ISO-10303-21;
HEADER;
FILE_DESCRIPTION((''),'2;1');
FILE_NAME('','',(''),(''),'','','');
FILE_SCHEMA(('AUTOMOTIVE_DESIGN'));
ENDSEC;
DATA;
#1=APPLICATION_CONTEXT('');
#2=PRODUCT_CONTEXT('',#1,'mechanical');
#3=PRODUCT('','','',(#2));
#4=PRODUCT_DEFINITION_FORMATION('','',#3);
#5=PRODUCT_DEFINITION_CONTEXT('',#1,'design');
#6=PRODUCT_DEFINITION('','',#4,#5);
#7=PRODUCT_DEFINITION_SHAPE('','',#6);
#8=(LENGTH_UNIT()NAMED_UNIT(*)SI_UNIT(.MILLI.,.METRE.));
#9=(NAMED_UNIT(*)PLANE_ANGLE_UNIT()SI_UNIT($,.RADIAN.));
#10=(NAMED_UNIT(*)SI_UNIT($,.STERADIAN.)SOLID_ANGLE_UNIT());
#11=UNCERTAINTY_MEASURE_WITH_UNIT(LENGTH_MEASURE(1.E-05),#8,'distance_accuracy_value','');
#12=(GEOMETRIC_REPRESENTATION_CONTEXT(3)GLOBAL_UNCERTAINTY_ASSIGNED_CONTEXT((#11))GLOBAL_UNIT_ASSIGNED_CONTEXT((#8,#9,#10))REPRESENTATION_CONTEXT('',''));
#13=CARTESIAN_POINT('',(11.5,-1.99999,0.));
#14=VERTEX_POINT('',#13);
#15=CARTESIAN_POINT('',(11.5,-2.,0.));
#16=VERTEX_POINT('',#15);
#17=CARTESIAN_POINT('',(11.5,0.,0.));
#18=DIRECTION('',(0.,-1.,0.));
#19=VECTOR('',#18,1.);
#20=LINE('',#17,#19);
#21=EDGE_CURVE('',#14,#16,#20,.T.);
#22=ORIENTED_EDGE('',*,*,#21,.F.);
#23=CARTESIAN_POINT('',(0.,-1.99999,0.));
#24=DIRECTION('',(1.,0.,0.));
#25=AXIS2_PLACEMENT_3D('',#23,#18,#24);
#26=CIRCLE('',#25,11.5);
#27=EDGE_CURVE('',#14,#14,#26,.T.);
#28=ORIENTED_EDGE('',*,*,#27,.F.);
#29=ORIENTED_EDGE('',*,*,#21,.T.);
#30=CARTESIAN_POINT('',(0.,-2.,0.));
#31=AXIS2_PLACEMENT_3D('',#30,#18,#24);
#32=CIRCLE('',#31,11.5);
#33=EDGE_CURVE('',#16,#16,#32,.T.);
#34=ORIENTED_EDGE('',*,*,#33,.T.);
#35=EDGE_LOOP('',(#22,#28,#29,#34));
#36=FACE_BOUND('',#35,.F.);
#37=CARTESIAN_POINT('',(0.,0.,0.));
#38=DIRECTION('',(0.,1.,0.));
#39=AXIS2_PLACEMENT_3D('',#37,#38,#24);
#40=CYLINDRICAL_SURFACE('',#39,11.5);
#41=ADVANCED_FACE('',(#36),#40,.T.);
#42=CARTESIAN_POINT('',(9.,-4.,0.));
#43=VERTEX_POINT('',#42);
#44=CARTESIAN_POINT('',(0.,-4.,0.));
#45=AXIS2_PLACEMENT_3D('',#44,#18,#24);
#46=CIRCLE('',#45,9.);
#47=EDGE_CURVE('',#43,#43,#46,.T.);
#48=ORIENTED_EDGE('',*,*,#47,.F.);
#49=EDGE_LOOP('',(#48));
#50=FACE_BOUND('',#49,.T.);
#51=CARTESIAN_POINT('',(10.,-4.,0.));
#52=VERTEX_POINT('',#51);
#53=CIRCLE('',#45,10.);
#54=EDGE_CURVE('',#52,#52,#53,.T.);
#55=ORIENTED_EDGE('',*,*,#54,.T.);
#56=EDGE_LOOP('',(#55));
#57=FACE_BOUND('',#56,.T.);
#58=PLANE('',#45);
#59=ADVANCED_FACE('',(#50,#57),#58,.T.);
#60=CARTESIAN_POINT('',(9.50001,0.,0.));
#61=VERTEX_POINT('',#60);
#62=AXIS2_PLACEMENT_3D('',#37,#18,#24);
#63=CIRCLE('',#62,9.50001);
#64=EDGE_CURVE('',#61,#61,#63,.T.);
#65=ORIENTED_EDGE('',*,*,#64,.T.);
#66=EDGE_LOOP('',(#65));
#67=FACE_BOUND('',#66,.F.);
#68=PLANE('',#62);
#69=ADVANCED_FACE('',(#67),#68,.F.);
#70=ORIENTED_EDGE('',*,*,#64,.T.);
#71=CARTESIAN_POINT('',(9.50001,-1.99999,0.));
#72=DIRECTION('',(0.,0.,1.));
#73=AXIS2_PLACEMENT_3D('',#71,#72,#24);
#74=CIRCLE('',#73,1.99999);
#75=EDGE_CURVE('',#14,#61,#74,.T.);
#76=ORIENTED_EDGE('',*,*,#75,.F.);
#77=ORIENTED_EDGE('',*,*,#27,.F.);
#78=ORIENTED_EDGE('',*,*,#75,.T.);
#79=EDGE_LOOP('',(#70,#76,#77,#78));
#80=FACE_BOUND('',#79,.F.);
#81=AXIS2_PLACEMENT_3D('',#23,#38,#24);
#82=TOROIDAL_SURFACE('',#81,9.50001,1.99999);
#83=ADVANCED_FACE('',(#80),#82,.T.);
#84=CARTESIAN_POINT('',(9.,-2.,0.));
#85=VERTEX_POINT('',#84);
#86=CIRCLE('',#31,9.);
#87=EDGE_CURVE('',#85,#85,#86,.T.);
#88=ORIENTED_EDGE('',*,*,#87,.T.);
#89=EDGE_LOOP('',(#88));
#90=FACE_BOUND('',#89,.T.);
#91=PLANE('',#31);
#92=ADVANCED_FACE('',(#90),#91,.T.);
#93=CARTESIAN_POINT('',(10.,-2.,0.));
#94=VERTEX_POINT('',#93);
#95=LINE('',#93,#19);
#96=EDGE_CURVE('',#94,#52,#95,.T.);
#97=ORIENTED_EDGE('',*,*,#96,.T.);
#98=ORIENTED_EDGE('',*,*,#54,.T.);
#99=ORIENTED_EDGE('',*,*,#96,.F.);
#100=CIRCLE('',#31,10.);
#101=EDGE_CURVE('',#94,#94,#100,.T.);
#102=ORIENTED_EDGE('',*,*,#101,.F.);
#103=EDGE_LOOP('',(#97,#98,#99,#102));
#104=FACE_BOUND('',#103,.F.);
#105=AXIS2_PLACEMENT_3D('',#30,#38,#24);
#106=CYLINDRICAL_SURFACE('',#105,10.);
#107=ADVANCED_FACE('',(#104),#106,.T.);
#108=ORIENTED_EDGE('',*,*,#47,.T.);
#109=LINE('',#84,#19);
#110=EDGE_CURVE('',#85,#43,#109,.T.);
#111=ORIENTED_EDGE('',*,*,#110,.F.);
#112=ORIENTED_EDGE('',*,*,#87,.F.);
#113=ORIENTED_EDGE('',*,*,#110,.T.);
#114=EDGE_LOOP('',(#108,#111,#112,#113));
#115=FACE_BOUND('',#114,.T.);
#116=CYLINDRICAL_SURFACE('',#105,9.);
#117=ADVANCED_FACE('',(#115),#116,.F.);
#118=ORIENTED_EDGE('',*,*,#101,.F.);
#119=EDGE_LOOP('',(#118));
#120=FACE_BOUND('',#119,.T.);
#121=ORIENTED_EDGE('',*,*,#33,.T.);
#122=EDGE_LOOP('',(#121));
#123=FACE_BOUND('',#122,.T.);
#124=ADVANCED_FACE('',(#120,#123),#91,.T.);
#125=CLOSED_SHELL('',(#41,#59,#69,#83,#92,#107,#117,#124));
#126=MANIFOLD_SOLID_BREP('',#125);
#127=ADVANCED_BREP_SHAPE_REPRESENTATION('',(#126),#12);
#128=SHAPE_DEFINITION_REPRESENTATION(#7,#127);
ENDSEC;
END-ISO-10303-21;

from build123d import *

# Parameters (mm, degrees)
F0_R     = 11.5
F1_DEPTH = 2
F2_R     = 10
F2_R_2   = 9
F3_DEPTH = 2
F4_R     = 1.99999


# Not quite as in the source:
# - a fillet or chamfer is up to 0.001 mm smaller than in the source, because OpenCascade refuses the exact size


with BuildPart() as f1:
    # F0 (on Front) → F1 (new body)
    with BuildSketch(Plane.XZ):
        Circle(F0_R)
    extrude(amount=F1_DEPTH)

    # F2 (on face) → F3 (join)
    with BuildSketch(Plane.XZ.offset(2)):
        Circle(F2_R)
        Circle(F2_R_2, mode=Mode.SUBTRACT)
    extrude(amount=F3_DEPTH)

    # F4 (radius 2 in the source; OpenCascade refuses exactly that, so slightly less here)
    f4_edges = [f1.edges().sort_by_distance(p)[0] for p in [
        (-11.5, 0, 0),
    ]]
    fillet(f4_edges, radius=F4_R)


solid = f1.part
